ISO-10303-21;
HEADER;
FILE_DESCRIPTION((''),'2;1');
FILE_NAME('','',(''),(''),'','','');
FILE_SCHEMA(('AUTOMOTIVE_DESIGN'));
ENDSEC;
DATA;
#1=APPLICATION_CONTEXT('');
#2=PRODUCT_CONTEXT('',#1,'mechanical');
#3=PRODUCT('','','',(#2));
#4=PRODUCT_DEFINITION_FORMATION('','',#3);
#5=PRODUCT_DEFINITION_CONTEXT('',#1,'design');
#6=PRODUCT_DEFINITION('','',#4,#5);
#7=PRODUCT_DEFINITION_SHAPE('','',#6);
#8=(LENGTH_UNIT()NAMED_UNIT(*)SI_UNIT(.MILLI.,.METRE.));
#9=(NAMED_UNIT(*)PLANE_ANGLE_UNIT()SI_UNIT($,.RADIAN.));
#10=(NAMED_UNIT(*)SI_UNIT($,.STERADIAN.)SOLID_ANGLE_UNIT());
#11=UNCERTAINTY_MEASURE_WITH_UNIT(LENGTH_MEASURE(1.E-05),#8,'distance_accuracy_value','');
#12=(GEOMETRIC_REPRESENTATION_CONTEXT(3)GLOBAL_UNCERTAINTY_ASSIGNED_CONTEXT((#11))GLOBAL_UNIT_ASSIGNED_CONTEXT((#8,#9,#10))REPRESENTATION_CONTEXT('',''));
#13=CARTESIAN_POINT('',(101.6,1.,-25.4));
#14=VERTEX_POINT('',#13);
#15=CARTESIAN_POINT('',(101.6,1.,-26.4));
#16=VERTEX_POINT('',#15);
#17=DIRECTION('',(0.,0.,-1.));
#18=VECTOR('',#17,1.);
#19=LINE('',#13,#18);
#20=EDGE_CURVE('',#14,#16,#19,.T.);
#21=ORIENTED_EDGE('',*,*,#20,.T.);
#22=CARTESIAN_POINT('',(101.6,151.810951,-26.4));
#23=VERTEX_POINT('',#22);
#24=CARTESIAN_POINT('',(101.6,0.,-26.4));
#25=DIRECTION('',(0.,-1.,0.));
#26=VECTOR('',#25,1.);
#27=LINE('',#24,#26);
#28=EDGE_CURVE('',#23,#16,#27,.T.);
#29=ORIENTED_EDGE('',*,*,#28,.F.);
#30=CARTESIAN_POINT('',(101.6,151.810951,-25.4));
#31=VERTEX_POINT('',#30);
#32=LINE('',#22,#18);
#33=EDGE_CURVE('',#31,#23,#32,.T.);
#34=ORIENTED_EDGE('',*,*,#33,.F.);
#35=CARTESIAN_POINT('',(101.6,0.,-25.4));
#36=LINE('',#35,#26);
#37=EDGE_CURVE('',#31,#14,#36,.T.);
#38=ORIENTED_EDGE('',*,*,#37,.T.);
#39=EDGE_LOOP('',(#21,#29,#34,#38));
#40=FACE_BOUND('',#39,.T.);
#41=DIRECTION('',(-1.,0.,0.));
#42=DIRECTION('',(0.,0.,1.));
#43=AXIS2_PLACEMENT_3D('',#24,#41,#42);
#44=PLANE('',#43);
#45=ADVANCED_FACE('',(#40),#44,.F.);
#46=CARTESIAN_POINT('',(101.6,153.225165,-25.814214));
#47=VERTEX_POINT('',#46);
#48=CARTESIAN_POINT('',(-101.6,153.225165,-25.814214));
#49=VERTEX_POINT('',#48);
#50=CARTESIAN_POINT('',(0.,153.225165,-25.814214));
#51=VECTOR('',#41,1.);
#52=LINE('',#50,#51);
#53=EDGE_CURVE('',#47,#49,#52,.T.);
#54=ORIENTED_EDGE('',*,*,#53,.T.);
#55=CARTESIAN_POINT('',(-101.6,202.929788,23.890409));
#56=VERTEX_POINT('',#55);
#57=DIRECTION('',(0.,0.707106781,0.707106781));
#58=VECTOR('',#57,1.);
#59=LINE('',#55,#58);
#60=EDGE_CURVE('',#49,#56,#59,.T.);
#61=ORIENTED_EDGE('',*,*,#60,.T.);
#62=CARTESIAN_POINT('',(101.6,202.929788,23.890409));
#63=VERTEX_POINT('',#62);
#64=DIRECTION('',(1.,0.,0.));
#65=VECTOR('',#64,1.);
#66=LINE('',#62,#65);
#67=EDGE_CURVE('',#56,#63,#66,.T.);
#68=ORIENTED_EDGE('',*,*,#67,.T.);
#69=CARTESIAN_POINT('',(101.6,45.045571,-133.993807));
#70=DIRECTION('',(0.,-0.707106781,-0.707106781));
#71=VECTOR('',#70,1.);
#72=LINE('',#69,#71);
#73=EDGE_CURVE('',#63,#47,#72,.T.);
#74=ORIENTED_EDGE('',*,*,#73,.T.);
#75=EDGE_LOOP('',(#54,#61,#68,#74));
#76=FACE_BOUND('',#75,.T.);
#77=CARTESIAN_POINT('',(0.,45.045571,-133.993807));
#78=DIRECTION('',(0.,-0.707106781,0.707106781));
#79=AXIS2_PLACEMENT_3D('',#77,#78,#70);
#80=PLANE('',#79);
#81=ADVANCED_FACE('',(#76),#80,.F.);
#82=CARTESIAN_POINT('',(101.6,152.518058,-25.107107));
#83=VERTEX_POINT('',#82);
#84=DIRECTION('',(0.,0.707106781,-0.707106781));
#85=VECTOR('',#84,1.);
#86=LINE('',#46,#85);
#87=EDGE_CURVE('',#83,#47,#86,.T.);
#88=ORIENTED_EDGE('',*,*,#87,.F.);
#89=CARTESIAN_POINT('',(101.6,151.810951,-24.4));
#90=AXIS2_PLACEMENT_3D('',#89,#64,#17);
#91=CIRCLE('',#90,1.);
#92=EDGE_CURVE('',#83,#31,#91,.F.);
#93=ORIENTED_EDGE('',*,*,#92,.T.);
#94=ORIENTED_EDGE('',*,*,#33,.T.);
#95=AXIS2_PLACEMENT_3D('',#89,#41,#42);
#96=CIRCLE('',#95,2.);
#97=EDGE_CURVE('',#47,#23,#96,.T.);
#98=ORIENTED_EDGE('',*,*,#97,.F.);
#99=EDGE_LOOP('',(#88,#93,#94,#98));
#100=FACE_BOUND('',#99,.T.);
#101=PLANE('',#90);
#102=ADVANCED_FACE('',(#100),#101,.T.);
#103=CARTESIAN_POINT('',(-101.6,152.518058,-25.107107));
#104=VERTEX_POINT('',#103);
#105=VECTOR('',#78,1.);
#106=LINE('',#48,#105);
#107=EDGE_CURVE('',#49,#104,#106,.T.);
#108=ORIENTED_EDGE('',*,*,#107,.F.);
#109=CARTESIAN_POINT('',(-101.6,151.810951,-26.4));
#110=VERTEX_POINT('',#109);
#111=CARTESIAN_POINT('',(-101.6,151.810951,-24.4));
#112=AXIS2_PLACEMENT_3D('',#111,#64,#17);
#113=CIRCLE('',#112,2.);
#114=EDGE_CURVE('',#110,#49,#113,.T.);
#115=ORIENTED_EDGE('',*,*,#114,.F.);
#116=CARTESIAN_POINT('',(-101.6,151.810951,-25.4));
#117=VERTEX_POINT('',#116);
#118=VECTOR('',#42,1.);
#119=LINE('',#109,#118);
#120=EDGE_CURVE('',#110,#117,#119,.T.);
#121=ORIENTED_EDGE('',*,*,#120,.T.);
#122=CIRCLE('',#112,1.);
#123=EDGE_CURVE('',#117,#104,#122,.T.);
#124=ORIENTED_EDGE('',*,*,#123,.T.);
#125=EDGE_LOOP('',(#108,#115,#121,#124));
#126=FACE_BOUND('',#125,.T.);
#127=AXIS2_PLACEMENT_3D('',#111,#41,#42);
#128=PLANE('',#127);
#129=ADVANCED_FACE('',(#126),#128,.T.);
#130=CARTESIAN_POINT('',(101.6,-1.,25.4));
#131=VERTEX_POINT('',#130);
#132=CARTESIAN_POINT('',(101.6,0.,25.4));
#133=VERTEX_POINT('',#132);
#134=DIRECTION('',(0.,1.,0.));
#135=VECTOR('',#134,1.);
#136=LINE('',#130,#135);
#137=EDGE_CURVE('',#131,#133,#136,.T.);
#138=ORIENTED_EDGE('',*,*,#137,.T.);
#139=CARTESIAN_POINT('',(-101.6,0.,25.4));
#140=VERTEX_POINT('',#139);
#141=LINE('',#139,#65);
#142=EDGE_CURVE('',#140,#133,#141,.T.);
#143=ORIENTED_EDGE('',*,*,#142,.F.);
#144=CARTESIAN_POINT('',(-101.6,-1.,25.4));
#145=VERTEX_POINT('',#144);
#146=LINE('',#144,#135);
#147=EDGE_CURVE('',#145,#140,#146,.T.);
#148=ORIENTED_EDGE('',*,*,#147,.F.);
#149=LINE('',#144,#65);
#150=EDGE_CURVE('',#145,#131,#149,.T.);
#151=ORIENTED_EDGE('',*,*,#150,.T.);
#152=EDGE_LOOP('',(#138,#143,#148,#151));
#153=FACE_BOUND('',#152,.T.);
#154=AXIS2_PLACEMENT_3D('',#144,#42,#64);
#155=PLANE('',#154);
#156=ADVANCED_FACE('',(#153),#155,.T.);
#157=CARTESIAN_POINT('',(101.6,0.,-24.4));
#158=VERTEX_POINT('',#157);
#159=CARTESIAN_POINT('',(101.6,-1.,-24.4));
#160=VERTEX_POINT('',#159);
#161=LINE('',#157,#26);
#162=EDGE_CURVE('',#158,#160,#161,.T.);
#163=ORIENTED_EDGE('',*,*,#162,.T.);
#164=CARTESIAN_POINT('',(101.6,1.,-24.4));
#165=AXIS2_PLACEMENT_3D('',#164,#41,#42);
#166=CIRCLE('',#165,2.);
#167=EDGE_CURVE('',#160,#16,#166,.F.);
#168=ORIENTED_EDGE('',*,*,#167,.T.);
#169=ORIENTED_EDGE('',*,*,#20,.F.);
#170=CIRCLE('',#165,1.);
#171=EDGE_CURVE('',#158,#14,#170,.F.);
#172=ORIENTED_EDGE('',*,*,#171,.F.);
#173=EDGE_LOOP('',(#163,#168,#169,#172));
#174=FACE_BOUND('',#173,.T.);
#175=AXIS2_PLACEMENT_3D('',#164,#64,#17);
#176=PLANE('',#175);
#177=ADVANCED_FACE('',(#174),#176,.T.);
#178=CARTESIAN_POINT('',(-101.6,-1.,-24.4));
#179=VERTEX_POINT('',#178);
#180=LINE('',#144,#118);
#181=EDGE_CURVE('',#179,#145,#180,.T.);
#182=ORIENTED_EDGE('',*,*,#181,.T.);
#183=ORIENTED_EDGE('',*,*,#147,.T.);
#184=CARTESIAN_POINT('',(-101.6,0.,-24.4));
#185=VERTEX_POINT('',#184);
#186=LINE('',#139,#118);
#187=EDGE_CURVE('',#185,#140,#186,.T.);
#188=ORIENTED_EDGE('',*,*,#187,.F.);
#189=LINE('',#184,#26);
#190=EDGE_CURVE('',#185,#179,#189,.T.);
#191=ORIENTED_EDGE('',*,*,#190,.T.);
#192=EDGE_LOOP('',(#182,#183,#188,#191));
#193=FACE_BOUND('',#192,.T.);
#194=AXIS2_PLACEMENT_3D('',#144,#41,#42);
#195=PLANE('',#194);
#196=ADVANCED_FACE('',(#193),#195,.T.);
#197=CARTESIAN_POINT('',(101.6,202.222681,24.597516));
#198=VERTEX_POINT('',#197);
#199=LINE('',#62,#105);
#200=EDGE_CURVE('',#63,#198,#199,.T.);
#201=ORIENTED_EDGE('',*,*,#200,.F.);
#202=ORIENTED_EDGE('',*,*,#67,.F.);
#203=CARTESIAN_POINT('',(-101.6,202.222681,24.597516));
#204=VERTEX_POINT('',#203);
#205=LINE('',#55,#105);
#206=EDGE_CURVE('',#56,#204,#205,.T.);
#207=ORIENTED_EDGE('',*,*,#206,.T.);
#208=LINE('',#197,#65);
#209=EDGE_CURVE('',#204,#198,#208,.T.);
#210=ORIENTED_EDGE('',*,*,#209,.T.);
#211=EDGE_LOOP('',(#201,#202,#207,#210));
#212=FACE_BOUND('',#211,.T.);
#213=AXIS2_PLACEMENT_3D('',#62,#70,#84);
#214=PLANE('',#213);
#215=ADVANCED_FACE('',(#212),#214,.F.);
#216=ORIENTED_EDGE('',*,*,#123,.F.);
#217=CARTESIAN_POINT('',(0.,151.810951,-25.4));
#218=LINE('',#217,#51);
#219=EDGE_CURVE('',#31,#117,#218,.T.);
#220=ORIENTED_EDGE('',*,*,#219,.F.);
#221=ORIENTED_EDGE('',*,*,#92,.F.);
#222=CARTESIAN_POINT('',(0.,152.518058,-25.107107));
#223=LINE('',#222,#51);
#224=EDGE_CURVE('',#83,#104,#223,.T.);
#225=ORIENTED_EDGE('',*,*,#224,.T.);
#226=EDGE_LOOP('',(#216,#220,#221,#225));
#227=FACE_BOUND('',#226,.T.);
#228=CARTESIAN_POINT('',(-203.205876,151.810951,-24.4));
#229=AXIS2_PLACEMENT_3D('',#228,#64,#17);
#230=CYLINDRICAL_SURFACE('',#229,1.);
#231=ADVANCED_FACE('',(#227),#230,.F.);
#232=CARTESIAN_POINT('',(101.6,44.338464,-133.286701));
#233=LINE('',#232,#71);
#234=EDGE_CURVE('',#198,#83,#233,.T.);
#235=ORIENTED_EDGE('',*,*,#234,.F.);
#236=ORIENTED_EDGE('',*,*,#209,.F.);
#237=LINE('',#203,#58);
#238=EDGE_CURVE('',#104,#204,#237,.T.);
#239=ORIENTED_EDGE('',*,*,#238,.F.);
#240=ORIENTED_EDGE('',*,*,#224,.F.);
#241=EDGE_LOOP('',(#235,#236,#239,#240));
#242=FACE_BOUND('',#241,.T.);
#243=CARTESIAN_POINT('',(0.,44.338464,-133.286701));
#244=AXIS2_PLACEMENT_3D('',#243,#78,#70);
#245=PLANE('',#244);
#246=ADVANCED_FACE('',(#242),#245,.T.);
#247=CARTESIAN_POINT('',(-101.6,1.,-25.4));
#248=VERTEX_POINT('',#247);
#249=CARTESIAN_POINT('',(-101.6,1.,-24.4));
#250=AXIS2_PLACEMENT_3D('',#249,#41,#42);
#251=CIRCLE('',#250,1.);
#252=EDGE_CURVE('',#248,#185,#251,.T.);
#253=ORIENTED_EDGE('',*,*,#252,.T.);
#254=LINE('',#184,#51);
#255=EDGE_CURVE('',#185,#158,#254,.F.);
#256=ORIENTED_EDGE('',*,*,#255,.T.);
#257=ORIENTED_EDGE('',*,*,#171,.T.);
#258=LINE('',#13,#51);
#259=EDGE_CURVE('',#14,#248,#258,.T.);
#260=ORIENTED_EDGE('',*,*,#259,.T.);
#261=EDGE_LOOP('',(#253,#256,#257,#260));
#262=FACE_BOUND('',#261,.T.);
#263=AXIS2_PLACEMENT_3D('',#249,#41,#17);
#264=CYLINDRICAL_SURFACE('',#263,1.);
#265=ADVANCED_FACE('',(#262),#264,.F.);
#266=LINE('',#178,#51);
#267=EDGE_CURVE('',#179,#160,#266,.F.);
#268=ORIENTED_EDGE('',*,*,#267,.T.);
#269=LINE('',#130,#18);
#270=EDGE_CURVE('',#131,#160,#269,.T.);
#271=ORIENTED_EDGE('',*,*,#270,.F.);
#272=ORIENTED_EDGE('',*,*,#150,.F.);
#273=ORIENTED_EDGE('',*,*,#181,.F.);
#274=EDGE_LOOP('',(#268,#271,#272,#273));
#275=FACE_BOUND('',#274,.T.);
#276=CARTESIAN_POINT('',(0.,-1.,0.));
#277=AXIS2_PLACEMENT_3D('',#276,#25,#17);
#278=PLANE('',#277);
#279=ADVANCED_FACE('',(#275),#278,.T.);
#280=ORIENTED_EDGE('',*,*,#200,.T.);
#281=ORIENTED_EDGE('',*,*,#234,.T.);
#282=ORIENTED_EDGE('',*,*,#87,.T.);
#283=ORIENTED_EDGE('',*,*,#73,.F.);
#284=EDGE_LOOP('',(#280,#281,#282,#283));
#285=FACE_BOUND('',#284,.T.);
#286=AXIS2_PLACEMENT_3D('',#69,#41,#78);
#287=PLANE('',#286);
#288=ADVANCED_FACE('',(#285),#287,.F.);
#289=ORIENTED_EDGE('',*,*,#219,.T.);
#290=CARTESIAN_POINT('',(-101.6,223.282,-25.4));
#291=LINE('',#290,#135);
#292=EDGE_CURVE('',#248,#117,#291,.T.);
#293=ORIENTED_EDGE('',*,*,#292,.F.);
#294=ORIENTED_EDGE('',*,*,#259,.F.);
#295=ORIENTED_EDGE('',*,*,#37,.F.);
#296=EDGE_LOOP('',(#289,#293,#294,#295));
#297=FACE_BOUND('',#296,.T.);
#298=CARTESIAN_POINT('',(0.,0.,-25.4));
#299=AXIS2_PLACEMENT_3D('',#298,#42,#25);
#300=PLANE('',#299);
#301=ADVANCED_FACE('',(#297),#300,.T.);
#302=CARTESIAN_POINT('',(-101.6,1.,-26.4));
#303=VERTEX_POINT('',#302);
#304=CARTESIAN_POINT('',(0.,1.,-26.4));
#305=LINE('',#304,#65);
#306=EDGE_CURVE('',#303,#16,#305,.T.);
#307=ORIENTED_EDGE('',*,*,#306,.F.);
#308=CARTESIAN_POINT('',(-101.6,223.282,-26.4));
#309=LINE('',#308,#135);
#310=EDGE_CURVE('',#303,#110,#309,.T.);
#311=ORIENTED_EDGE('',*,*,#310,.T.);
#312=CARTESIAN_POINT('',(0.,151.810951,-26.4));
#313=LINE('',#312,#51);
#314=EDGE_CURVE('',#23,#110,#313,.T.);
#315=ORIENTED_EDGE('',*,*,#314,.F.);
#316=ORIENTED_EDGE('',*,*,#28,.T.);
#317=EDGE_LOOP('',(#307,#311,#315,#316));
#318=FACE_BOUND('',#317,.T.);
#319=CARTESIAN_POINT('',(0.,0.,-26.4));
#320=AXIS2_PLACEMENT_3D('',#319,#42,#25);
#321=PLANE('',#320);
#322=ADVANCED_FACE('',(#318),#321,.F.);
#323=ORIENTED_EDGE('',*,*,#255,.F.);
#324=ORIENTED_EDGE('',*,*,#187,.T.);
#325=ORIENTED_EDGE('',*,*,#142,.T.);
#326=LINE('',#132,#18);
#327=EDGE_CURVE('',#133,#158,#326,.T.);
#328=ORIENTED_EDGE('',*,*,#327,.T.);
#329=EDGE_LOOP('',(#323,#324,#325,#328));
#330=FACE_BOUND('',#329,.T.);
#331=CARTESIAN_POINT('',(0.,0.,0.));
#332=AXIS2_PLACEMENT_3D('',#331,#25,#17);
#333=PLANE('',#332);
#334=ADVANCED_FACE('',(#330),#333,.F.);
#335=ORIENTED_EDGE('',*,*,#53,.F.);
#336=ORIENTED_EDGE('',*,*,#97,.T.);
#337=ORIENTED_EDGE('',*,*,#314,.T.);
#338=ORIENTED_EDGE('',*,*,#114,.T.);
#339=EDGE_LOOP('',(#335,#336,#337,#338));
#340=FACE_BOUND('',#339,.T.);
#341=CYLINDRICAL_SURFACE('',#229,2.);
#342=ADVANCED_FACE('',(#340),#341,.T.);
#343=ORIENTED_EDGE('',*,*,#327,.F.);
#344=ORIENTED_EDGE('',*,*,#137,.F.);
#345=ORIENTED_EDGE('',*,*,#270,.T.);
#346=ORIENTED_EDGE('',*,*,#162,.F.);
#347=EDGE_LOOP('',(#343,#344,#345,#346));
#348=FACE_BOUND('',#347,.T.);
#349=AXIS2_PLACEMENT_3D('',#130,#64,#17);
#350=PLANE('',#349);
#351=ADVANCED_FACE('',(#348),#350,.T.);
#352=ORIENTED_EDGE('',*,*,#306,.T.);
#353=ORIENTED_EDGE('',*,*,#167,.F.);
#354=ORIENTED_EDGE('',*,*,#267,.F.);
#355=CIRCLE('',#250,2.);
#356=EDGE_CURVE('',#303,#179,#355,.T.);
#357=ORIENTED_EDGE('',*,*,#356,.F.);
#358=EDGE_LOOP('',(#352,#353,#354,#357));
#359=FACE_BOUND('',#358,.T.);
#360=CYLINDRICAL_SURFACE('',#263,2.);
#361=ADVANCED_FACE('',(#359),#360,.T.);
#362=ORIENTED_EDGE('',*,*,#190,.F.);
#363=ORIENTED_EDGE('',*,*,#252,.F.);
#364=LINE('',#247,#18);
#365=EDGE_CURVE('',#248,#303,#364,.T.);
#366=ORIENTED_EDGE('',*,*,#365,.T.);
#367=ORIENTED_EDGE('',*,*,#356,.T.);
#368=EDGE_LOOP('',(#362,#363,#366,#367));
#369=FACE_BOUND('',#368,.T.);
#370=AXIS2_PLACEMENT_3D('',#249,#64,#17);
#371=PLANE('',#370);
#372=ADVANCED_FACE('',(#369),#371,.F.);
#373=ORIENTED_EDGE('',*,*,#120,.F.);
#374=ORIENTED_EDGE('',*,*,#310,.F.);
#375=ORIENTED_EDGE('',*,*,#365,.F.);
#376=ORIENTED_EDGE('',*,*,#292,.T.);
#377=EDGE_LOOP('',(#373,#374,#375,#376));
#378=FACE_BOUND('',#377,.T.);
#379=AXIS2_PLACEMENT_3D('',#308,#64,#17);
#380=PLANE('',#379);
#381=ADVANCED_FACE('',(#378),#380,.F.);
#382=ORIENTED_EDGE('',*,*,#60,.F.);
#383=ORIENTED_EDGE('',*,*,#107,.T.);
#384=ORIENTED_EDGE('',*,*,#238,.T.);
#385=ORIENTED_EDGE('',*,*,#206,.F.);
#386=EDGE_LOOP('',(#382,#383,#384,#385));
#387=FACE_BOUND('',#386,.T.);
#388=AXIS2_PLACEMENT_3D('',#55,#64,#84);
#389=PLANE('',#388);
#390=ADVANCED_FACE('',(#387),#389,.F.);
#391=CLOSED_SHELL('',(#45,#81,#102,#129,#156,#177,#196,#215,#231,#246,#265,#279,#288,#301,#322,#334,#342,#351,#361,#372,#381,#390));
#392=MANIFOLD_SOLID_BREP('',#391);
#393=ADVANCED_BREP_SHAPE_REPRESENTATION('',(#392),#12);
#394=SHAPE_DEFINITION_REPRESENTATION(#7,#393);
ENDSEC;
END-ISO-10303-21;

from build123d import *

# Parameters (mm, degrees)
SKETCH22_W                   = 203.2
SKETCH22_H                   = 50.8
BASE_FLANGE2_DEPTH           = 1
EDGE_FLANGE3_STRIP_W         = 7
EDGE_FLANGE3_STRIP_H         = 1
EDGE_FLANGE3_STRIP_CUT_DEPTH = 203.2
EDGE_FLANGE3_DEPTH           = 203.2
SKETCHED_START               = -101.6
SKETCHED_BEND2_DEPTH         = 203.2
SKETCHED_BEND2_2_DEPTH       = 203.2


# Read off the part's stored shape, not the designer's step: Sketched Bend2
# Sheet-metal steps are written as plain solids
with BuildPart() as part:
    # Sketch22 → Base-Flange2 (new body)
    with BuildSketch(Plane(origin=(0, 0, 0), x_dir=(1, 0, 0), z_dir=(0, 1, 0))):
        Rectangle(SKETCH22_W, SKETCH22_H)
    extrude(amount=-BASE_FLANGE2_DEPTH)

    # Edge-Flange3 strip (across the edge) → Edge-Flange3 strip cut (cut)
    with BuildSketch(Plane(origin=(101.6, 0, -26.4), x_dir=(0, 0, 1), z_dir=(-1, 0, 0))):
        with Locations((-1.5, -0.5)):
            Rectangle(EDGE_FLANGE3_STRIP_W, EDGE_FLANGE3_STRIP_H)
    extrude(amount=EDGE_FLANGE3_STRIP_CUT_DEPTH, mode=Mode.SUBTRACT)

    # Edge-Flange3 section (across the edge) → Edge-Flange3 (add)
    with BuildSketch(Plane(origin=(101.6, 0, -26.4), x_dir=(0, 0, 1), z_dir=(-1, 0, 0))):
        with BuildLine():
            Line((0, 1), (0, 223.282))
            Line((0, 223.282), (1, 223.282))
            Line((1, 223.282), (1, 1))
            ThreePointArc((1, 1), (1.292893219, 0.292893219), (2, 0))
            Line((2, 0), (2, -1))
            ThreePointArc((2, -1), (0.585786438, -0.414213562), (0, 1))
        make_face()
    extrude(amount=EDGE_FLANGE3_DEPTH)

    # Sketched Bend2 outline → Sketched Bend2 (cut)
    with BuildSketch(Plane.YZ.offset(SKETCHED_START)):
        with BuildLine():
            ThreePointArc((153.22516494, -25.814213562), (152.576318242, -26.247759065), (151.810951377, -26.4))
            Line((151.810951377, -26.4), (223.282, -26.4))
            Line((223.282, -26.4), (223.282, -25.4))
            Line((223.282, -25.4), (153.639378502, -25.4))
            Line((153.639378502, -25.4), (153.22516494, -25.814213562))
        make_face()
    extrude(amount=SKETCHED_BEND2_DEPTH, mode=Mode.SUBTRACT)

    # Sketched Bend2 2 outline → Sketched Bend2 2 (add)
    with BuildSketch(Plane.YZ.offset(SKETCHED_START)):
        with BuildLine():
            Line((151.810951377, -25.4), (153.639378502, -25.4))
            Line((153.639378502, -25.4), (202.929787528, 23.890409026))
            Line((202.929787528, 23.890409026), (202.222680747, 24.597515807))
            Line((202.222680747, 24.597515807), (152.518058159, -25.107106781))
            ThreePointArc((152.518058159, -25.107106781), (152.19363481, -25.323879533), (151.810951377, -25.4))
        make_face()
    extrude(amount=SKETCHED_BEND2_2_DEPTH)


solid = part.part
